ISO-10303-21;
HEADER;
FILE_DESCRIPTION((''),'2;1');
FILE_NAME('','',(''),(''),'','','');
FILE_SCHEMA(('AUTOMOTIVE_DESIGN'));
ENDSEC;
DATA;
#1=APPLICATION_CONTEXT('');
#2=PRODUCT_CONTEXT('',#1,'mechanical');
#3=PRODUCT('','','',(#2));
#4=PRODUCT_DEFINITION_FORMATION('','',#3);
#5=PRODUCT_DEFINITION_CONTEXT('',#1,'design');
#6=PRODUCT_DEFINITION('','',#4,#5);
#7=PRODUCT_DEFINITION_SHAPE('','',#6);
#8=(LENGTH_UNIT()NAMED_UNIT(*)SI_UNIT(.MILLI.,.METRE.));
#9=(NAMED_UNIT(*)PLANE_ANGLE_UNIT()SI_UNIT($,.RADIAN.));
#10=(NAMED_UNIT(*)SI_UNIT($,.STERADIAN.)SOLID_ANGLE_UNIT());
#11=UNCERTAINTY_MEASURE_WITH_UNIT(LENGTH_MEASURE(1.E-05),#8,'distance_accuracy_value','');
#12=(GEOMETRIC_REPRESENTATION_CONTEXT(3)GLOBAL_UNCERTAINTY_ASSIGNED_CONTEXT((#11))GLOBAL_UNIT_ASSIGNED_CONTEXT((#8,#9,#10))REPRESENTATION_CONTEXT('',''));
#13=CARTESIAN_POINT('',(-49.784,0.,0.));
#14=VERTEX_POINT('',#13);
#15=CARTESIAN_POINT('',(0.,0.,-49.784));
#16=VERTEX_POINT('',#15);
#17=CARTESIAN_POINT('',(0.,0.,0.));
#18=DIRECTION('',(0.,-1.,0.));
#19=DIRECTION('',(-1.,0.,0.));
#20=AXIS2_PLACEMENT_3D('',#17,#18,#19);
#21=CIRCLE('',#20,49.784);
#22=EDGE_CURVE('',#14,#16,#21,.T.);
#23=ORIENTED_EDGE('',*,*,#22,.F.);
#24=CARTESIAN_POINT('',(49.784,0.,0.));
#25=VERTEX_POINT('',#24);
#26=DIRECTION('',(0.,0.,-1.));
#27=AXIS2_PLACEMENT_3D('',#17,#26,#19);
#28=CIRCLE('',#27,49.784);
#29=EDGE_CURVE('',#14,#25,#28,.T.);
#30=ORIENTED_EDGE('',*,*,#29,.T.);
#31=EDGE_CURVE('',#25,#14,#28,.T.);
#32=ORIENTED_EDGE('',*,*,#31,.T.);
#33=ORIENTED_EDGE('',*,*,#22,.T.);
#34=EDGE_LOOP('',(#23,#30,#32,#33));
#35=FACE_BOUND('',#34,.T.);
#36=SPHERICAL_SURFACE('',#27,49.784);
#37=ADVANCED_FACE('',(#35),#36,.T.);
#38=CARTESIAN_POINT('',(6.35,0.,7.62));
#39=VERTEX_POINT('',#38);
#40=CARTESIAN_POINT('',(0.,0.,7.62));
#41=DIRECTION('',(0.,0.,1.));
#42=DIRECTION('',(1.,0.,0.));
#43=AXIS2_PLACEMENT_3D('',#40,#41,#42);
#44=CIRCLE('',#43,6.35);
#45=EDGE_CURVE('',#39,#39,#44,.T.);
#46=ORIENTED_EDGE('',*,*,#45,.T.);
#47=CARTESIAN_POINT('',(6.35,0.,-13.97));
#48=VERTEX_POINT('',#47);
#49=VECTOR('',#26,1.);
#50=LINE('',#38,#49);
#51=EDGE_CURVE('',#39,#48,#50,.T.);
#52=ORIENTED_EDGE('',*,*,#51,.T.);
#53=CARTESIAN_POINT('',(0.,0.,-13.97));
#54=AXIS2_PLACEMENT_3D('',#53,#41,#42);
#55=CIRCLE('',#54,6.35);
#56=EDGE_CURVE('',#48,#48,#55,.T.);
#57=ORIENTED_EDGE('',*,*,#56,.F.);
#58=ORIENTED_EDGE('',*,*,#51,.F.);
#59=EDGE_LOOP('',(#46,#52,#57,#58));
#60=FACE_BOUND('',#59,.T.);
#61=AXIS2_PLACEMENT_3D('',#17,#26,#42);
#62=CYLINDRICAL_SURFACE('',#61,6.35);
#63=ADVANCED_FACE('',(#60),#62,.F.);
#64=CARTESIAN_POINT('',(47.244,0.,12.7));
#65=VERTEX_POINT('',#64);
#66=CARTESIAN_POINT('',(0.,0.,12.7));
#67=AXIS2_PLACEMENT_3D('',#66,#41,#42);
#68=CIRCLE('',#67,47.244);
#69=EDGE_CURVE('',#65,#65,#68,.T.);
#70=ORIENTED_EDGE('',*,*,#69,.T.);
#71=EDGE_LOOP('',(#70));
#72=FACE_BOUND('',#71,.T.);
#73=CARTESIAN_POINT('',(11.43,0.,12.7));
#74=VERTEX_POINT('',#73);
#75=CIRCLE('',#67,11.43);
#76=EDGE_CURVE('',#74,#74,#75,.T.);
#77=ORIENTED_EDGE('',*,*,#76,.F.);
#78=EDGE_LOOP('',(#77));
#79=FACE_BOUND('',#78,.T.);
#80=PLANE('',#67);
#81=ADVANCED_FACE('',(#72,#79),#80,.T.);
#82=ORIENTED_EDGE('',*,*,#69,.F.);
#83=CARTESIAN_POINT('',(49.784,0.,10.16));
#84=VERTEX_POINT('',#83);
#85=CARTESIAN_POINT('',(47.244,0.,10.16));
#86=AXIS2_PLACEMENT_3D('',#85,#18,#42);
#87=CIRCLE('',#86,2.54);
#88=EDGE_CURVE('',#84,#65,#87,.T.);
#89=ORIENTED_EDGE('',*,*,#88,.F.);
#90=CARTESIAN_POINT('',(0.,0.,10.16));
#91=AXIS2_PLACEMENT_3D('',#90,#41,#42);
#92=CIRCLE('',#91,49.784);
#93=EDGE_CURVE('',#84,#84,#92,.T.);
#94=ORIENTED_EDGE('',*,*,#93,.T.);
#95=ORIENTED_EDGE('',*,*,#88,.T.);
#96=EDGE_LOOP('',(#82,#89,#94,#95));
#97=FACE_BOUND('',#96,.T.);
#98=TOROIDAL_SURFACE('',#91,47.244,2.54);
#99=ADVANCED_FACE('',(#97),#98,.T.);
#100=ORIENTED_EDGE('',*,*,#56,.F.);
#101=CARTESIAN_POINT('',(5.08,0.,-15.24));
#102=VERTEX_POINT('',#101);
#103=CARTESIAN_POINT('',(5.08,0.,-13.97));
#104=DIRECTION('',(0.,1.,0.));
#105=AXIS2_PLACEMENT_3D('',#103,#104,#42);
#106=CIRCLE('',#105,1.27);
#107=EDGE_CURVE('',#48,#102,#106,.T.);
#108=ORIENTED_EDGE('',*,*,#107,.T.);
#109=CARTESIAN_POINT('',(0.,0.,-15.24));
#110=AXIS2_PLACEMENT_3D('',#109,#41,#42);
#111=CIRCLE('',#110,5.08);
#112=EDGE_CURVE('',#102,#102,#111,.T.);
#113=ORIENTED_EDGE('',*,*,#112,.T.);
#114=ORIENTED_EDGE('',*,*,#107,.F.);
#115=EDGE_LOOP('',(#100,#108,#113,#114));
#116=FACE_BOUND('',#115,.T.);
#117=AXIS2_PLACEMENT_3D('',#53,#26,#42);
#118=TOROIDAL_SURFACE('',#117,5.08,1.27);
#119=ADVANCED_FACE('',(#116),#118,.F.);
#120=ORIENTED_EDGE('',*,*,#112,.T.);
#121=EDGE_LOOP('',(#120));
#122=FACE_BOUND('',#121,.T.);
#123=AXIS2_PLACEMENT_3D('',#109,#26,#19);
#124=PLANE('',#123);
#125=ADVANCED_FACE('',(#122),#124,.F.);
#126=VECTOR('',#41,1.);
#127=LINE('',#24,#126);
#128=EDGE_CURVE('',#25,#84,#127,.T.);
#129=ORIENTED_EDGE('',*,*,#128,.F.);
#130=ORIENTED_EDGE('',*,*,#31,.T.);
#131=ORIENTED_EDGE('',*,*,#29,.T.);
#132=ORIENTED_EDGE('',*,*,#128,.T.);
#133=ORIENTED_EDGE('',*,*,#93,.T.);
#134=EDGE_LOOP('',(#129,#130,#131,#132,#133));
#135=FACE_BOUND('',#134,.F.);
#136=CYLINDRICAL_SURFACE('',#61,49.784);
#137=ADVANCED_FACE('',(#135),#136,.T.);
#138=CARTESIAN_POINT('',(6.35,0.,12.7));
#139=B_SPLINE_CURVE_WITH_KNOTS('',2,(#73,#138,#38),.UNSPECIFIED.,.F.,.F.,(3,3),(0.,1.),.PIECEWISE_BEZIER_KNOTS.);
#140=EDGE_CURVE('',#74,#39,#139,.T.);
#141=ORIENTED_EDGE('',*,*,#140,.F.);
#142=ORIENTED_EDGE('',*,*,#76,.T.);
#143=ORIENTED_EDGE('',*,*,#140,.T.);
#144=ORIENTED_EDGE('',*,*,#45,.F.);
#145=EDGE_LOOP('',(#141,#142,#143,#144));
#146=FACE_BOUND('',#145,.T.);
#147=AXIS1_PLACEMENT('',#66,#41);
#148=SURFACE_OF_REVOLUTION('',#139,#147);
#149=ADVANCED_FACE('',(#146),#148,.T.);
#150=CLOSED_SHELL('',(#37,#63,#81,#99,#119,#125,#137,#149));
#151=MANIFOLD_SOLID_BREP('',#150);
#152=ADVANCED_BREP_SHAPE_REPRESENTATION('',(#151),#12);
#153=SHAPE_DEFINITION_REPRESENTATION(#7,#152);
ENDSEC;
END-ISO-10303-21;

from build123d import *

# Parameters (mm, degrees)
F2_R     = 49.784
F2_R_2   = 6.35
F3_DEPTH = 12.7
F4_R     = 2.54
F6_DEPTH = 15.24
F7_R     = 1.27


# Not quite as in the source:
# - a fillet or chamfer that OpenCascade refuses, or shapes differently, is made with other operations: its cross-section is extruded or revolved along the edge and cut away or added


with BuildPart() as f1:
    # F0 (on Front) → F1 (revolve)
    with BuildSketch(Plane.XZ):
        with BuildLine():
            Line((0, 0), (-49.784, 0))
            ThreePointArc((-49.784, 0), (-35.2026039946, -35.2026039946), (0, -49.784))
            Line((0, -49.784), (0, 0))
        make_face()
    revolve(axis=Axis((0, 0, -24.892), (0, 0, -1)))

    # F2 (on face) → F3 (join)
    with BuildSketch(Plane.XY):
        Circle(F2_R)
        Circle(F2_R_2, mode=Mode.SUBTRACT)
    extrude(amount=F3_DEPTH)

    # F4
    f4_edges = [f1.edges().sort_by_distance(p)[0] for p in [
        (-49.784, 0, 12.7),
    ]]
    fillet(f4_edges, radius=F4_R)

    # F5: fillet of radius 5.08 on 1 edges, made by hand

    # F5_s1 → F5_t2 (revolve, cut)
    with BuildSketch(Plane.XZ):
        with BuildLine():
            add(Edge.make_bspline(
                [(11.43, 12.7), (6.35, 12.7), (6.35, 7.62)],
                knots=[0, 0, 0, 1, 1, 1], degree=2, weights=[1, 1, 1]))
            Line((6.35, 7.62), (6.35, 12.7))
            Line((6.35, 12.7), (11.43, 12.7))
        make_face()
    revolve(axis=Axis((0, 0, 12.7), (0, 0, 1)), mode=Mode.SUBTRACT)

    # F6 (cut): a face of the model
    f6_faces = [f1.faces().sort_by_distance(p)[0] for p in [
        (0, 0, 0),
    ]]
    extrude(f6_faces, amount=-F6_DEPTH, mode=Mode.SUBTRACT)

    # F7
    f7_edges = [f1.edges().sort_by_distance(p)[0] for p in [
        (-6.35, 0, -15.24),
    ]]
    fillet(f7_edges, radius=F7_R)


solid = f1.part
